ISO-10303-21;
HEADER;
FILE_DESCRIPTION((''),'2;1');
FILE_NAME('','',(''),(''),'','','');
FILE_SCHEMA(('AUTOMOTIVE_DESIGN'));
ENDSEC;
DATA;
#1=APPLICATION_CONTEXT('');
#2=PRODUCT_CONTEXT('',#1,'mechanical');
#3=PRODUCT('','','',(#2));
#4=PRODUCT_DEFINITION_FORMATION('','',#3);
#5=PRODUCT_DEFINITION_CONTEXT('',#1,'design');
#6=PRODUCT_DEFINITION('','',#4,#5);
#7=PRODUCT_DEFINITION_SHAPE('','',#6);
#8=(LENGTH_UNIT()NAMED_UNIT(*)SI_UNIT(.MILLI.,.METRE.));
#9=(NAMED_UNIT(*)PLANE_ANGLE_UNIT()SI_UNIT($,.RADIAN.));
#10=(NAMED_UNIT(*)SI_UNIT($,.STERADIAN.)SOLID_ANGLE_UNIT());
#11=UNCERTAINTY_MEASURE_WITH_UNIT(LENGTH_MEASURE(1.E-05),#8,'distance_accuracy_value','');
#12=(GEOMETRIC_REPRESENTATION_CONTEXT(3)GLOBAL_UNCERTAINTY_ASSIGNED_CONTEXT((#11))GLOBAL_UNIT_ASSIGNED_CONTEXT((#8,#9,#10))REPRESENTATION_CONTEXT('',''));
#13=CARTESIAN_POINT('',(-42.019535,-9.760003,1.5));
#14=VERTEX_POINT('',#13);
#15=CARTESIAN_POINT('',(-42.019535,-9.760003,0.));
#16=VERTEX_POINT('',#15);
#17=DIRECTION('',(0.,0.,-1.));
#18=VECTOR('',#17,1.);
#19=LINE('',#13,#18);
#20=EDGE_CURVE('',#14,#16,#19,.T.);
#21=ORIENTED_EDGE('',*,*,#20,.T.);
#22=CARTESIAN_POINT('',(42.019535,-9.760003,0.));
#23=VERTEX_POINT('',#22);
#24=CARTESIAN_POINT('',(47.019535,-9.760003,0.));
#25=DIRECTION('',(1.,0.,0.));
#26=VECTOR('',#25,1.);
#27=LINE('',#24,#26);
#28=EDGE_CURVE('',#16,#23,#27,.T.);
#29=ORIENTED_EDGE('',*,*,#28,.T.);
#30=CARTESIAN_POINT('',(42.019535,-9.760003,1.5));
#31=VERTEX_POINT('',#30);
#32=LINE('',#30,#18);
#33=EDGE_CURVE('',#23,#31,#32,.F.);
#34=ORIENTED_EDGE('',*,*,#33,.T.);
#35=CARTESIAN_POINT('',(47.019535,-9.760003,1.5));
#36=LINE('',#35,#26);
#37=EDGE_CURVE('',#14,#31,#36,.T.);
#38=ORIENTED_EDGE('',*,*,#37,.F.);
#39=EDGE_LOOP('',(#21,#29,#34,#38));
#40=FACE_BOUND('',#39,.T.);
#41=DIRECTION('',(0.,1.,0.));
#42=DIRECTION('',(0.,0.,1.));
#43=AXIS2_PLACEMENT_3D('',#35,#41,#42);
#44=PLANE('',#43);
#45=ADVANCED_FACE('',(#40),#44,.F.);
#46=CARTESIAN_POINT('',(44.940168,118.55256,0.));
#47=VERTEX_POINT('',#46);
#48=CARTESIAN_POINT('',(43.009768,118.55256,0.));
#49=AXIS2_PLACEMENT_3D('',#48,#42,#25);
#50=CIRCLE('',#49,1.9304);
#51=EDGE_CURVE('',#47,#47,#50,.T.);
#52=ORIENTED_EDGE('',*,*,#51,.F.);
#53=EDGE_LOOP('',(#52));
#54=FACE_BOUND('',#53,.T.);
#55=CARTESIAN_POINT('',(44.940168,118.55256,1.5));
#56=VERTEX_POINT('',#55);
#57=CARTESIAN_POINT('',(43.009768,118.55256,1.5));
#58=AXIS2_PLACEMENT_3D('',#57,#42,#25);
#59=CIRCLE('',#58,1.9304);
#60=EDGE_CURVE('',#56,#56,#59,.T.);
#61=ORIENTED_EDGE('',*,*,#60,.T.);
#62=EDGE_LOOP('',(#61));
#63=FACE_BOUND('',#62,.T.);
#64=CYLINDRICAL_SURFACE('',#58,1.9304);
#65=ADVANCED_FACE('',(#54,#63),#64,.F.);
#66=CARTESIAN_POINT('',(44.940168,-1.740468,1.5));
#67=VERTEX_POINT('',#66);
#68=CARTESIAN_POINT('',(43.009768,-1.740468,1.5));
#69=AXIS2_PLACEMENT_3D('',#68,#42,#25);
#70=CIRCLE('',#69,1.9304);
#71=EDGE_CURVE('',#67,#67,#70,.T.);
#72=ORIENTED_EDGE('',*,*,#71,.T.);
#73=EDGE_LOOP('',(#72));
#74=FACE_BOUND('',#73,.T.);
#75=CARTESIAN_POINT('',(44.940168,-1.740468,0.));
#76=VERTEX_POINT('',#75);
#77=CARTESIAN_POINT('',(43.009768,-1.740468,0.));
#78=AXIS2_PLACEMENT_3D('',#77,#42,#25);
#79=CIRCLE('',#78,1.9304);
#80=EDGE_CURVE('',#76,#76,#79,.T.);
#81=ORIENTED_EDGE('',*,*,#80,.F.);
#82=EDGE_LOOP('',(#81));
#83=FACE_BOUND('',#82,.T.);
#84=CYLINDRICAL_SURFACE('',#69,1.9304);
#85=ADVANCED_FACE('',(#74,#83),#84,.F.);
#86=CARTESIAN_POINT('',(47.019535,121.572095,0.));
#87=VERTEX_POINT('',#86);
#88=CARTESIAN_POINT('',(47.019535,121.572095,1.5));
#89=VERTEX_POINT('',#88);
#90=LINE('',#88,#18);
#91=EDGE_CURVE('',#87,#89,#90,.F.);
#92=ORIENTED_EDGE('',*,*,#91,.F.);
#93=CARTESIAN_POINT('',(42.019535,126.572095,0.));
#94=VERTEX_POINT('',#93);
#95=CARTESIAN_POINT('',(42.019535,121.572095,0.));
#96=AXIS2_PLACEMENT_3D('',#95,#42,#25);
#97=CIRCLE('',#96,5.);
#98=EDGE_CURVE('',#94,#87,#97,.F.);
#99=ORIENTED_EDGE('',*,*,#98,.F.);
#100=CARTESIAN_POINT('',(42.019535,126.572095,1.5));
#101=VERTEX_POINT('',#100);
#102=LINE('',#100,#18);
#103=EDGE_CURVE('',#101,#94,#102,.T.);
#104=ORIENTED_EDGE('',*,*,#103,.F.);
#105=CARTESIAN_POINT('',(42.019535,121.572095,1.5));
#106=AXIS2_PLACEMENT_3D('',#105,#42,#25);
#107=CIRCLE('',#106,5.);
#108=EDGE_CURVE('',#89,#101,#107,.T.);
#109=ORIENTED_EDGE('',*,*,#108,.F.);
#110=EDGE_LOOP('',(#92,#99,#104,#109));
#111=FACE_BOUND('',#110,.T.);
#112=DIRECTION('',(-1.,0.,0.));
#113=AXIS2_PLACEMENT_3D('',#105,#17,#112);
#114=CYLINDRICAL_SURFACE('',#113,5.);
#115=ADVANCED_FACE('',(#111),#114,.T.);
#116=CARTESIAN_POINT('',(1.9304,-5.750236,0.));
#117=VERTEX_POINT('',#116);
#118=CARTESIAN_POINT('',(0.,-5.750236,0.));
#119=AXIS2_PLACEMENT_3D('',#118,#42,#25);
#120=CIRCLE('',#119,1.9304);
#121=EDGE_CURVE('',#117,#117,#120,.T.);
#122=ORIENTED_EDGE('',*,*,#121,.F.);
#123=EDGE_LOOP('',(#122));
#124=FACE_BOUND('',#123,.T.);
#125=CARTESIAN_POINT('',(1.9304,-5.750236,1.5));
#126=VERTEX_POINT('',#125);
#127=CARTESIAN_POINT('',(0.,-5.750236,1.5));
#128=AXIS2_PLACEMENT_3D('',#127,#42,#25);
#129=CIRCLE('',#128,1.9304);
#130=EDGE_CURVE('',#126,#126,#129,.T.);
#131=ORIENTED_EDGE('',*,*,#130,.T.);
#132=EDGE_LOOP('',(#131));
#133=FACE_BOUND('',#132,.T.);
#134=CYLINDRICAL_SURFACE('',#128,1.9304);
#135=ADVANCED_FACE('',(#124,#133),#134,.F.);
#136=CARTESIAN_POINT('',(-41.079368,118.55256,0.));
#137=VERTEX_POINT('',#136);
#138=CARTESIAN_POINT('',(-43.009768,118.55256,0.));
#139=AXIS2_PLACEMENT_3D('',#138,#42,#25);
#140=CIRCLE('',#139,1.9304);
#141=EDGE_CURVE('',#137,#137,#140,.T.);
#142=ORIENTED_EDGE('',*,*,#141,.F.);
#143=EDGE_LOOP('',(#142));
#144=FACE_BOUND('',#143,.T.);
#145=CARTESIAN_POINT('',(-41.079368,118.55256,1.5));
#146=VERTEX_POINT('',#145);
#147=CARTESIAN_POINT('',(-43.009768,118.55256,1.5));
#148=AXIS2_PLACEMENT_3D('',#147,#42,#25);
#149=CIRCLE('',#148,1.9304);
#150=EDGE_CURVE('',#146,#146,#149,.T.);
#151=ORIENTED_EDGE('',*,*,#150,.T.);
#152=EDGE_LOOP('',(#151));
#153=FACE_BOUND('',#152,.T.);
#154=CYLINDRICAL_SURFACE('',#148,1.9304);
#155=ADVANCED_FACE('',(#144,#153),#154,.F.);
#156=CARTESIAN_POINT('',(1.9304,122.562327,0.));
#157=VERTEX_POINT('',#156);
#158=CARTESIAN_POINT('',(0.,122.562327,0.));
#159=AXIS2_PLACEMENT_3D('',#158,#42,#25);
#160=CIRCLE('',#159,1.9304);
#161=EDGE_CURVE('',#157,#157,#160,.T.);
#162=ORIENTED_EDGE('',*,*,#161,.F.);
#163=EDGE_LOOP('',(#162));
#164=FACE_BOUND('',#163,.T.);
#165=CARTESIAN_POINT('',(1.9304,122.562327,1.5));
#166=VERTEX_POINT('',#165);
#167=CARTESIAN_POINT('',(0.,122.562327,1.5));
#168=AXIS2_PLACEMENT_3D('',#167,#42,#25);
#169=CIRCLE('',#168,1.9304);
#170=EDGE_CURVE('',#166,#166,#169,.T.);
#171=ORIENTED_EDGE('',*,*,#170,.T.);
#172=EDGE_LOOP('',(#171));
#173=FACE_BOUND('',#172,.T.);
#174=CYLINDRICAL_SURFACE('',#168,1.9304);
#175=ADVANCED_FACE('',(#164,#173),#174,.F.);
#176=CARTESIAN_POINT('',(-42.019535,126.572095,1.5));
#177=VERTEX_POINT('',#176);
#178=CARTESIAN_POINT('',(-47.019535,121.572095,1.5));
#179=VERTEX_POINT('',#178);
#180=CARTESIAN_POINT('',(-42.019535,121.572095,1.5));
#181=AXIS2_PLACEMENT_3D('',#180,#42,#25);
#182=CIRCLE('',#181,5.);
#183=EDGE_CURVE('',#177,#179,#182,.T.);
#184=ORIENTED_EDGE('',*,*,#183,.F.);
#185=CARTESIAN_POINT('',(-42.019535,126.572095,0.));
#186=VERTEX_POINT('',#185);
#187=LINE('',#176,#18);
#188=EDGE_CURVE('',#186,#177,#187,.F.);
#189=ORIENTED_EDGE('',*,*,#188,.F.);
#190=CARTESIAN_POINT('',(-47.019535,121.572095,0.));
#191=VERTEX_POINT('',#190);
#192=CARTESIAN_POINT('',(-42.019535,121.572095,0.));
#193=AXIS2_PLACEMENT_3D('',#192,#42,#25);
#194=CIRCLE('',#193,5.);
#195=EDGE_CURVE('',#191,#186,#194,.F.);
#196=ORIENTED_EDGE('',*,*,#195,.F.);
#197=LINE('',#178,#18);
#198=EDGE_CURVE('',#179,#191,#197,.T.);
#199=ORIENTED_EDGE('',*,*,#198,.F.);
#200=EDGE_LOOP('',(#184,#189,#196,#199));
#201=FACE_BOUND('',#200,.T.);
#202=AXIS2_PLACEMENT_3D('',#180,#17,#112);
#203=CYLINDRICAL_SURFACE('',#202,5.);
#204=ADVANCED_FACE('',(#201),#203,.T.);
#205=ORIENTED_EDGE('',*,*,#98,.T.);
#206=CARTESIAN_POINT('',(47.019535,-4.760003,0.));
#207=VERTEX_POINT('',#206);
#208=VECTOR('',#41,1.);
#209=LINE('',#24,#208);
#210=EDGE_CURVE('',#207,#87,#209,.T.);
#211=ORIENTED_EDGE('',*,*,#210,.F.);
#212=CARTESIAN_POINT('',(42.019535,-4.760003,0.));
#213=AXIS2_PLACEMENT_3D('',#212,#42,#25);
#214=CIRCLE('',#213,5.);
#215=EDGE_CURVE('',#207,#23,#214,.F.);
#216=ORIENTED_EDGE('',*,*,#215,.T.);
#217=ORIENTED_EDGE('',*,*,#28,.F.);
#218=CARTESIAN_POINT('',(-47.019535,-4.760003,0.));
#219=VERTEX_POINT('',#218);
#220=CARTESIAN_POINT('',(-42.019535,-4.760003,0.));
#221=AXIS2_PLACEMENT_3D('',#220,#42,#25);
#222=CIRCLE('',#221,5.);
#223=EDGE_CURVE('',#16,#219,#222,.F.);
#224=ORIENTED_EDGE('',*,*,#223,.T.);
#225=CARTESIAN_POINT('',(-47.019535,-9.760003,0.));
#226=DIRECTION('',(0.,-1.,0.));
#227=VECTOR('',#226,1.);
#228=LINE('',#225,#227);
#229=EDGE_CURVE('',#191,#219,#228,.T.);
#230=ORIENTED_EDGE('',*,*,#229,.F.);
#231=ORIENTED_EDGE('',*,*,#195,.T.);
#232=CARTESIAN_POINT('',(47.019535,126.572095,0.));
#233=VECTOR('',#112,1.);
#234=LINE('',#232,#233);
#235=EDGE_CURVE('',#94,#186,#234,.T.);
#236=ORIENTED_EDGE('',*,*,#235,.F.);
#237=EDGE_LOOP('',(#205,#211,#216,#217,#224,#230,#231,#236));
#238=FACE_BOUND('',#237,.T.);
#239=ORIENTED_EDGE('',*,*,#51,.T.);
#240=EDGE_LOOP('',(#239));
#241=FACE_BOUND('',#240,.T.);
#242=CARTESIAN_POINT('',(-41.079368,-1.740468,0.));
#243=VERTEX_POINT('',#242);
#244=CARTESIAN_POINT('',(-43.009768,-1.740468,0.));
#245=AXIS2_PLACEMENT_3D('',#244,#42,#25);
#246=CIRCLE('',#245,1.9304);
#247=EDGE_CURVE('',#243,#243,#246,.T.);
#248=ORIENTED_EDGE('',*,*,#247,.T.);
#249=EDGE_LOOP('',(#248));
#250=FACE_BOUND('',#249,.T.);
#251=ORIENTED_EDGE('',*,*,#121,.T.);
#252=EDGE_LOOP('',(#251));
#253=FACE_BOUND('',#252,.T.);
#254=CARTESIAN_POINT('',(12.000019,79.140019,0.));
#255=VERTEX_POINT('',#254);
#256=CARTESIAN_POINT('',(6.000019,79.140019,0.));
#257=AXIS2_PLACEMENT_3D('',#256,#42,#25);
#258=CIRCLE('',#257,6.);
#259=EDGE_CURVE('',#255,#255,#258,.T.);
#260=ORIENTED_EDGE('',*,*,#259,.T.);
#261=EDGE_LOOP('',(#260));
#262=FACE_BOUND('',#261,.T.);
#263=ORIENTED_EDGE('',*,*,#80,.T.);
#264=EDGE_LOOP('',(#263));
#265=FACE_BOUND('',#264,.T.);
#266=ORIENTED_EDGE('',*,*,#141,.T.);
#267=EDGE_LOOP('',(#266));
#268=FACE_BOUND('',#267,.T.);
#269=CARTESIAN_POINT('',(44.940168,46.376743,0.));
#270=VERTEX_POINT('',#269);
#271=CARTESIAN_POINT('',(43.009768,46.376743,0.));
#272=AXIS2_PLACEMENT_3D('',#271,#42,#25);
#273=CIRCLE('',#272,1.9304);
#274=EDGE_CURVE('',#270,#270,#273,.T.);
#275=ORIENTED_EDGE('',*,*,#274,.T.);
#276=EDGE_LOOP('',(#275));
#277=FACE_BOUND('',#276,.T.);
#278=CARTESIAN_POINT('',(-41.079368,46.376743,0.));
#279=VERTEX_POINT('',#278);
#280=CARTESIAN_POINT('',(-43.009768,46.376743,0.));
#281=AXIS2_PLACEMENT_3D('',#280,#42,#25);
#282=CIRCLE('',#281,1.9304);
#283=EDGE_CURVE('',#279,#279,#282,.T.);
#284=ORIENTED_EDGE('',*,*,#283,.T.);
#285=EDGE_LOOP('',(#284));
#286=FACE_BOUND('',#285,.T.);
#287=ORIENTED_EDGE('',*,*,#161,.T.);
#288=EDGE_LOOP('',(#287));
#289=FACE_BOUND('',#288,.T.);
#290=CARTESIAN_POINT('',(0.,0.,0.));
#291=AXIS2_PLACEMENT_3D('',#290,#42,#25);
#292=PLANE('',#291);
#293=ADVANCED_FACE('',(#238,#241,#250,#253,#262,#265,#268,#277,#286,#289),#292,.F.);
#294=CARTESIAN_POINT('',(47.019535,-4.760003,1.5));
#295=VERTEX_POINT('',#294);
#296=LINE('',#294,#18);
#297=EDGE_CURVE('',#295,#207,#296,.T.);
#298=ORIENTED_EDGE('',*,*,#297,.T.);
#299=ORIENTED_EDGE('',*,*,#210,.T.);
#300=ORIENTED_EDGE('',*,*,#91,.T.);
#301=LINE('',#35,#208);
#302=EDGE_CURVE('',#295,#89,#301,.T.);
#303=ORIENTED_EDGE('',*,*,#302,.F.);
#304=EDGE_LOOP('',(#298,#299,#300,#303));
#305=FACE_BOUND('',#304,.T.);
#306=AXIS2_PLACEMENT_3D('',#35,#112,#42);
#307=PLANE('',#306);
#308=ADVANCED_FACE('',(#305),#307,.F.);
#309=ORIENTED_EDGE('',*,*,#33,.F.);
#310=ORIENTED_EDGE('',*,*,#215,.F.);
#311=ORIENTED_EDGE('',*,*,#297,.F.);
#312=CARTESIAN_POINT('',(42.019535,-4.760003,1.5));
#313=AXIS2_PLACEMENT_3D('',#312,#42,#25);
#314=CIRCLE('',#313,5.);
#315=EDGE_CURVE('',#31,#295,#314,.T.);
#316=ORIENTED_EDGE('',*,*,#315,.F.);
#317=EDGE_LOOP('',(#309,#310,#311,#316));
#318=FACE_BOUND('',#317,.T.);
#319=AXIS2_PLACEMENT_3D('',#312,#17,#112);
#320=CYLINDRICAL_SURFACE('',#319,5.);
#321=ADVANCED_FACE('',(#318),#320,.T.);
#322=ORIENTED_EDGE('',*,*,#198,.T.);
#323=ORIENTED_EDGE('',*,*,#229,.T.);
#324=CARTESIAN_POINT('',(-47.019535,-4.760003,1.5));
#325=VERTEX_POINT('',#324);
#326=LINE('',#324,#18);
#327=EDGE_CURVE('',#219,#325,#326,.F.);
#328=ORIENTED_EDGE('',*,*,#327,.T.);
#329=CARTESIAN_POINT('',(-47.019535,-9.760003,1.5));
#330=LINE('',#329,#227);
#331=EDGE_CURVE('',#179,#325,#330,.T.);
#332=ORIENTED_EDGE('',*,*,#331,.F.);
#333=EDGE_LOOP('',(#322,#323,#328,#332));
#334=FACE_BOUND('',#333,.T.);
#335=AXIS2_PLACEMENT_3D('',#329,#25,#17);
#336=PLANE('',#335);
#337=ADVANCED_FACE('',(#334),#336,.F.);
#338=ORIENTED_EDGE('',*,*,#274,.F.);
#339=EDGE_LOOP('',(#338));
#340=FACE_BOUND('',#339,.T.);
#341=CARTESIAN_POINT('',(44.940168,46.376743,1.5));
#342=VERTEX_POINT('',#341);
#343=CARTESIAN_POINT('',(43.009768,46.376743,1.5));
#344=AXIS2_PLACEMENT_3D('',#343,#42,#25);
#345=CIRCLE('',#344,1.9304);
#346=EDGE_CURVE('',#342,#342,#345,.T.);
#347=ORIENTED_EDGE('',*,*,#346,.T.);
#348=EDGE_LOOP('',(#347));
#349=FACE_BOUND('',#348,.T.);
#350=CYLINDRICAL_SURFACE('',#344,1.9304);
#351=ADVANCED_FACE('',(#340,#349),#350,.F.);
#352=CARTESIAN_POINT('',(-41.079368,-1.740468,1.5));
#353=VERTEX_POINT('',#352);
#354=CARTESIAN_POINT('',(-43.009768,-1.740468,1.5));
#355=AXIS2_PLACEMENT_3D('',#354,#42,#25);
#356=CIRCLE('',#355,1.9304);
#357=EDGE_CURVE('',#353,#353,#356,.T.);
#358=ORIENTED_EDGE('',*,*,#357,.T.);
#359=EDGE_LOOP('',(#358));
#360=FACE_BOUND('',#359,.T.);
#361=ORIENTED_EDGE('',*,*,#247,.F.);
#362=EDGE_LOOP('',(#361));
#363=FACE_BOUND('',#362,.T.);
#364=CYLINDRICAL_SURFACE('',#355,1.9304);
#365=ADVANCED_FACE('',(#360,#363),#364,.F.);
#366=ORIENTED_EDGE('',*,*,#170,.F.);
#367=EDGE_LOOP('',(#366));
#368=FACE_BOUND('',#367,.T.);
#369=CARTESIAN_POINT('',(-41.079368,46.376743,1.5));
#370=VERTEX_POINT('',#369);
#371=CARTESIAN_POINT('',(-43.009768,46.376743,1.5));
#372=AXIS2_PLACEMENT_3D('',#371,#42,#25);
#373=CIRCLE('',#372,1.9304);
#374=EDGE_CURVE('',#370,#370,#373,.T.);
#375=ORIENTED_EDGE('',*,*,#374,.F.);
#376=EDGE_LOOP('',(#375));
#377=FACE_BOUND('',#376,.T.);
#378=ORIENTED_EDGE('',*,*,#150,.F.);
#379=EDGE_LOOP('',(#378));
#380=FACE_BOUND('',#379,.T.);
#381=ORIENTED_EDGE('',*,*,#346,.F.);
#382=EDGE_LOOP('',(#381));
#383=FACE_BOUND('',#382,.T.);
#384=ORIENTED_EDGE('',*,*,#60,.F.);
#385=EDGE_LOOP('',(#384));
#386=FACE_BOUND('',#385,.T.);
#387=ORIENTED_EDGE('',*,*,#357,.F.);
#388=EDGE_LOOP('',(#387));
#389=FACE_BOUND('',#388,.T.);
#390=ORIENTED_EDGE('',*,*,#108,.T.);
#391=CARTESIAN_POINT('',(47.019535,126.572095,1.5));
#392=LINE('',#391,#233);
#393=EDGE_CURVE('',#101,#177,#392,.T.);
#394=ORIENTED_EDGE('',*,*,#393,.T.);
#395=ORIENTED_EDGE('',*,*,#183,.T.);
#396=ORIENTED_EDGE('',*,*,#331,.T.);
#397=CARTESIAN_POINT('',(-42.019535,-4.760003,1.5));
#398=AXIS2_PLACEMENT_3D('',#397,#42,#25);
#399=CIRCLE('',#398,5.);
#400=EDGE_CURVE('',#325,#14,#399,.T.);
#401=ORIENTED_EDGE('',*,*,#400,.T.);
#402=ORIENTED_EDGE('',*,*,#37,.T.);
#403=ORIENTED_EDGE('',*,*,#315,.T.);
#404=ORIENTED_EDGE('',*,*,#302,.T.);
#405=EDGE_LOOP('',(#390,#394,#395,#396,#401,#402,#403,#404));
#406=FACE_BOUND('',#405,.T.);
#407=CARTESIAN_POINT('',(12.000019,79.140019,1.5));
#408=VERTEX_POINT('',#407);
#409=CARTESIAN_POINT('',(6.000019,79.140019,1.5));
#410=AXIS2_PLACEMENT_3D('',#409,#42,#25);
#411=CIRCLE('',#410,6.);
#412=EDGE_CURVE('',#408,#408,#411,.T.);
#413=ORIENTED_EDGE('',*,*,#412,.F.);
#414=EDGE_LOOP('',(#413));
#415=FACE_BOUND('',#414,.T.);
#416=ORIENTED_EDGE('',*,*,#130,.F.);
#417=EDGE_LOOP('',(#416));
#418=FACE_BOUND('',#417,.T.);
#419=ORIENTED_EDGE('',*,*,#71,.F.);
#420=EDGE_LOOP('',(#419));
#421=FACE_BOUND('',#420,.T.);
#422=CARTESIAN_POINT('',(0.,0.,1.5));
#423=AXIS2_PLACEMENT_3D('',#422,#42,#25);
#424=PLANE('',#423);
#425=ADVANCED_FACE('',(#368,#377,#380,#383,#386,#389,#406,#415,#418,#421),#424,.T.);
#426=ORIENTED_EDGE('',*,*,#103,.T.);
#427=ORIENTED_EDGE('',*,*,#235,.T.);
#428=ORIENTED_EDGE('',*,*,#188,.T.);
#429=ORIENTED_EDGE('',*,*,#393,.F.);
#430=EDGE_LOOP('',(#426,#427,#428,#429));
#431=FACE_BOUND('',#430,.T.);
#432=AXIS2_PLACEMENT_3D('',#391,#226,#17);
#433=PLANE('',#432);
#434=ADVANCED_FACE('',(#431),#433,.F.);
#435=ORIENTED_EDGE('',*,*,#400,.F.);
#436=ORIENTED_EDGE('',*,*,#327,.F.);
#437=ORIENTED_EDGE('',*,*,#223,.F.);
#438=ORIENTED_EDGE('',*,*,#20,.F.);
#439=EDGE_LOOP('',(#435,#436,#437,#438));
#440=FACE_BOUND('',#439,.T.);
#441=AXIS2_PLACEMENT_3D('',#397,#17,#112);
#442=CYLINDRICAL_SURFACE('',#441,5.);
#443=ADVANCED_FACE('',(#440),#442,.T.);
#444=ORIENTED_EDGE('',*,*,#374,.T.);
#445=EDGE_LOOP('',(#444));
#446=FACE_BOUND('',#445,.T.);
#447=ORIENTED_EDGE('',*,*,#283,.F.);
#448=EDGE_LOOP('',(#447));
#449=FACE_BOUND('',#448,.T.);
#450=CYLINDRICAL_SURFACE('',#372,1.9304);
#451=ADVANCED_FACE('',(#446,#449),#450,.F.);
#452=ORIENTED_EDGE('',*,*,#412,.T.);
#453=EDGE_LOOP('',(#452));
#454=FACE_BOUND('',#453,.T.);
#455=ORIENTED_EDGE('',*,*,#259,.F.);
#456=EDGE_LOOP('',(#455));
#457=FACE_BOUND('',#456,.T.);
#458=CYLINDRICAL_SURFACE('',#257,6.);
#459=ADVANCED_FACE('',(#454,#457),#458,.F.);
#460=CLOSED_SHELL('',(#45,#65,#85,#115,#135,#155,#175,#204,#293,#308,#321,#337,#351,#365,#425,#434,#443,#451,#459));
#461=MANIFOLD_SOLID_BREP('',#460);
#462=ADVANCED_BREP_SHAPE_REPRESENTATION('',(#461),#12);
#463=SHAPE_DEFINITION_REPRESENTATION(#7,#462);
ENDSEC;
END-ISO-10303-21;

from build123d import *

# Parameters (mm, degrees)
SKETCH1_W                 = 94.03907037
SKETCH1_H                 = 136.332098139
BOSS_EXTRUDE1_DEPTH       = 1.5
FILLET1_R                 = 5
SKETCH_PATTERN1_START     = -1
SKETCH_PATTERN1_OUTLINE_R = 1.9304
SKETCH_PATTERN1_DEPTH     = 3
SKETCH4_R                 = 6
CUT_EXTRUDE2_DEPTH        = 136.031781017


with BuildPart() as part:
    # Sketch1 → Boss-Extrude1 (new body)
    with BuildSketch(Plane.XY):
        with Locations((0, 58.406045784)):
            Rectangle(SKETCH1_W, SKETCH1_H)
    extrude(amount=BOSS_EXTRUDE1_DEPTH)

    # Fillet1
    fillet1_edges = [part.edges().sort_by_distance(p)[0] for p in [
        (47.019535185, -9.760003286, 0.75),
        (-47.019535185, -9.760003286, 0.75),
        (-47.019535185, 126.572094853, 0.75),
        (47.019535185, 126.572094853, 0.75),
    ]]
    fillet(fillet1_edges, radius=FILLET1_R)

    # Sketch3 → #24 (0.152) Diameter Hole1 (revolve, cut)
    with BuildSketch(Plane(origin=(-43.009767592, 118.552559669, 1.5), x_dir=(0, -1, 0), z_dir=(1, 0, 0))):
        Polygon((0, 0), (0, 13.859901339), (1.9304, 12.7), (1.9304, 0), align=None)
    revolve(axis=Axis((-43.009767592, 118.552559669, 7.85), (0, 0, -1)), mode=Mode.SUBTRACT)

    # Sketch-Pattern1: read off the stored shape, not the designer's step
    # Sketch-Pattern1 outline → Sketch-Pattern1 (cut)
    with BuildSketch(Plane.XY.offset(SKETCH_PATTERN1_START)):
        with Locations((0, -5.750235693)):
            Circle(SKETCH_PATTERN1_OUTLINE_R)
        with Locations((0, 122.562327261)):
            Circle(SKETCH_PATTERN1_OUTLINE_R)
        with Locations((-43.009767592, -1.740468101)):
            Circle(SKETCH_PATTERN1_OUTLINE_R)
        with Locations((-43.009767592, 46.376743007)):
            Circle(SKETCH_PATTERN1_OUTLINE_R)
        with Locations((43.009767592, -1.740468101)):
            Circle(SKETCH_PATTERN1_OUTLINE_R)
        with Locations((43.009767592, 46.376743007)):
            Circle(SKETCH_PATTERN1_OUTLINE_R)
        with Locations((43.009767592, 118.552559669)):
            Circle(SKETCH_PATTERN1_OUTLINE_R)
    extrude(amount=SKETCH_PATTERN1_DEPTH, mode=Mode.SUBTRACT)

    # Sketch4 → Cut-Extrude2 (cut, through all)
    with BuildSketch(Plane.XY.offset(1.5)):
        with Locations((6.000018773, 79.140018508)):
            Circle(SKETCH4_R)
    extrude(amount=-CUT_EXTRUDE2_DEPTH, mode=Mode.SUBTRACT)


solid = part.part
